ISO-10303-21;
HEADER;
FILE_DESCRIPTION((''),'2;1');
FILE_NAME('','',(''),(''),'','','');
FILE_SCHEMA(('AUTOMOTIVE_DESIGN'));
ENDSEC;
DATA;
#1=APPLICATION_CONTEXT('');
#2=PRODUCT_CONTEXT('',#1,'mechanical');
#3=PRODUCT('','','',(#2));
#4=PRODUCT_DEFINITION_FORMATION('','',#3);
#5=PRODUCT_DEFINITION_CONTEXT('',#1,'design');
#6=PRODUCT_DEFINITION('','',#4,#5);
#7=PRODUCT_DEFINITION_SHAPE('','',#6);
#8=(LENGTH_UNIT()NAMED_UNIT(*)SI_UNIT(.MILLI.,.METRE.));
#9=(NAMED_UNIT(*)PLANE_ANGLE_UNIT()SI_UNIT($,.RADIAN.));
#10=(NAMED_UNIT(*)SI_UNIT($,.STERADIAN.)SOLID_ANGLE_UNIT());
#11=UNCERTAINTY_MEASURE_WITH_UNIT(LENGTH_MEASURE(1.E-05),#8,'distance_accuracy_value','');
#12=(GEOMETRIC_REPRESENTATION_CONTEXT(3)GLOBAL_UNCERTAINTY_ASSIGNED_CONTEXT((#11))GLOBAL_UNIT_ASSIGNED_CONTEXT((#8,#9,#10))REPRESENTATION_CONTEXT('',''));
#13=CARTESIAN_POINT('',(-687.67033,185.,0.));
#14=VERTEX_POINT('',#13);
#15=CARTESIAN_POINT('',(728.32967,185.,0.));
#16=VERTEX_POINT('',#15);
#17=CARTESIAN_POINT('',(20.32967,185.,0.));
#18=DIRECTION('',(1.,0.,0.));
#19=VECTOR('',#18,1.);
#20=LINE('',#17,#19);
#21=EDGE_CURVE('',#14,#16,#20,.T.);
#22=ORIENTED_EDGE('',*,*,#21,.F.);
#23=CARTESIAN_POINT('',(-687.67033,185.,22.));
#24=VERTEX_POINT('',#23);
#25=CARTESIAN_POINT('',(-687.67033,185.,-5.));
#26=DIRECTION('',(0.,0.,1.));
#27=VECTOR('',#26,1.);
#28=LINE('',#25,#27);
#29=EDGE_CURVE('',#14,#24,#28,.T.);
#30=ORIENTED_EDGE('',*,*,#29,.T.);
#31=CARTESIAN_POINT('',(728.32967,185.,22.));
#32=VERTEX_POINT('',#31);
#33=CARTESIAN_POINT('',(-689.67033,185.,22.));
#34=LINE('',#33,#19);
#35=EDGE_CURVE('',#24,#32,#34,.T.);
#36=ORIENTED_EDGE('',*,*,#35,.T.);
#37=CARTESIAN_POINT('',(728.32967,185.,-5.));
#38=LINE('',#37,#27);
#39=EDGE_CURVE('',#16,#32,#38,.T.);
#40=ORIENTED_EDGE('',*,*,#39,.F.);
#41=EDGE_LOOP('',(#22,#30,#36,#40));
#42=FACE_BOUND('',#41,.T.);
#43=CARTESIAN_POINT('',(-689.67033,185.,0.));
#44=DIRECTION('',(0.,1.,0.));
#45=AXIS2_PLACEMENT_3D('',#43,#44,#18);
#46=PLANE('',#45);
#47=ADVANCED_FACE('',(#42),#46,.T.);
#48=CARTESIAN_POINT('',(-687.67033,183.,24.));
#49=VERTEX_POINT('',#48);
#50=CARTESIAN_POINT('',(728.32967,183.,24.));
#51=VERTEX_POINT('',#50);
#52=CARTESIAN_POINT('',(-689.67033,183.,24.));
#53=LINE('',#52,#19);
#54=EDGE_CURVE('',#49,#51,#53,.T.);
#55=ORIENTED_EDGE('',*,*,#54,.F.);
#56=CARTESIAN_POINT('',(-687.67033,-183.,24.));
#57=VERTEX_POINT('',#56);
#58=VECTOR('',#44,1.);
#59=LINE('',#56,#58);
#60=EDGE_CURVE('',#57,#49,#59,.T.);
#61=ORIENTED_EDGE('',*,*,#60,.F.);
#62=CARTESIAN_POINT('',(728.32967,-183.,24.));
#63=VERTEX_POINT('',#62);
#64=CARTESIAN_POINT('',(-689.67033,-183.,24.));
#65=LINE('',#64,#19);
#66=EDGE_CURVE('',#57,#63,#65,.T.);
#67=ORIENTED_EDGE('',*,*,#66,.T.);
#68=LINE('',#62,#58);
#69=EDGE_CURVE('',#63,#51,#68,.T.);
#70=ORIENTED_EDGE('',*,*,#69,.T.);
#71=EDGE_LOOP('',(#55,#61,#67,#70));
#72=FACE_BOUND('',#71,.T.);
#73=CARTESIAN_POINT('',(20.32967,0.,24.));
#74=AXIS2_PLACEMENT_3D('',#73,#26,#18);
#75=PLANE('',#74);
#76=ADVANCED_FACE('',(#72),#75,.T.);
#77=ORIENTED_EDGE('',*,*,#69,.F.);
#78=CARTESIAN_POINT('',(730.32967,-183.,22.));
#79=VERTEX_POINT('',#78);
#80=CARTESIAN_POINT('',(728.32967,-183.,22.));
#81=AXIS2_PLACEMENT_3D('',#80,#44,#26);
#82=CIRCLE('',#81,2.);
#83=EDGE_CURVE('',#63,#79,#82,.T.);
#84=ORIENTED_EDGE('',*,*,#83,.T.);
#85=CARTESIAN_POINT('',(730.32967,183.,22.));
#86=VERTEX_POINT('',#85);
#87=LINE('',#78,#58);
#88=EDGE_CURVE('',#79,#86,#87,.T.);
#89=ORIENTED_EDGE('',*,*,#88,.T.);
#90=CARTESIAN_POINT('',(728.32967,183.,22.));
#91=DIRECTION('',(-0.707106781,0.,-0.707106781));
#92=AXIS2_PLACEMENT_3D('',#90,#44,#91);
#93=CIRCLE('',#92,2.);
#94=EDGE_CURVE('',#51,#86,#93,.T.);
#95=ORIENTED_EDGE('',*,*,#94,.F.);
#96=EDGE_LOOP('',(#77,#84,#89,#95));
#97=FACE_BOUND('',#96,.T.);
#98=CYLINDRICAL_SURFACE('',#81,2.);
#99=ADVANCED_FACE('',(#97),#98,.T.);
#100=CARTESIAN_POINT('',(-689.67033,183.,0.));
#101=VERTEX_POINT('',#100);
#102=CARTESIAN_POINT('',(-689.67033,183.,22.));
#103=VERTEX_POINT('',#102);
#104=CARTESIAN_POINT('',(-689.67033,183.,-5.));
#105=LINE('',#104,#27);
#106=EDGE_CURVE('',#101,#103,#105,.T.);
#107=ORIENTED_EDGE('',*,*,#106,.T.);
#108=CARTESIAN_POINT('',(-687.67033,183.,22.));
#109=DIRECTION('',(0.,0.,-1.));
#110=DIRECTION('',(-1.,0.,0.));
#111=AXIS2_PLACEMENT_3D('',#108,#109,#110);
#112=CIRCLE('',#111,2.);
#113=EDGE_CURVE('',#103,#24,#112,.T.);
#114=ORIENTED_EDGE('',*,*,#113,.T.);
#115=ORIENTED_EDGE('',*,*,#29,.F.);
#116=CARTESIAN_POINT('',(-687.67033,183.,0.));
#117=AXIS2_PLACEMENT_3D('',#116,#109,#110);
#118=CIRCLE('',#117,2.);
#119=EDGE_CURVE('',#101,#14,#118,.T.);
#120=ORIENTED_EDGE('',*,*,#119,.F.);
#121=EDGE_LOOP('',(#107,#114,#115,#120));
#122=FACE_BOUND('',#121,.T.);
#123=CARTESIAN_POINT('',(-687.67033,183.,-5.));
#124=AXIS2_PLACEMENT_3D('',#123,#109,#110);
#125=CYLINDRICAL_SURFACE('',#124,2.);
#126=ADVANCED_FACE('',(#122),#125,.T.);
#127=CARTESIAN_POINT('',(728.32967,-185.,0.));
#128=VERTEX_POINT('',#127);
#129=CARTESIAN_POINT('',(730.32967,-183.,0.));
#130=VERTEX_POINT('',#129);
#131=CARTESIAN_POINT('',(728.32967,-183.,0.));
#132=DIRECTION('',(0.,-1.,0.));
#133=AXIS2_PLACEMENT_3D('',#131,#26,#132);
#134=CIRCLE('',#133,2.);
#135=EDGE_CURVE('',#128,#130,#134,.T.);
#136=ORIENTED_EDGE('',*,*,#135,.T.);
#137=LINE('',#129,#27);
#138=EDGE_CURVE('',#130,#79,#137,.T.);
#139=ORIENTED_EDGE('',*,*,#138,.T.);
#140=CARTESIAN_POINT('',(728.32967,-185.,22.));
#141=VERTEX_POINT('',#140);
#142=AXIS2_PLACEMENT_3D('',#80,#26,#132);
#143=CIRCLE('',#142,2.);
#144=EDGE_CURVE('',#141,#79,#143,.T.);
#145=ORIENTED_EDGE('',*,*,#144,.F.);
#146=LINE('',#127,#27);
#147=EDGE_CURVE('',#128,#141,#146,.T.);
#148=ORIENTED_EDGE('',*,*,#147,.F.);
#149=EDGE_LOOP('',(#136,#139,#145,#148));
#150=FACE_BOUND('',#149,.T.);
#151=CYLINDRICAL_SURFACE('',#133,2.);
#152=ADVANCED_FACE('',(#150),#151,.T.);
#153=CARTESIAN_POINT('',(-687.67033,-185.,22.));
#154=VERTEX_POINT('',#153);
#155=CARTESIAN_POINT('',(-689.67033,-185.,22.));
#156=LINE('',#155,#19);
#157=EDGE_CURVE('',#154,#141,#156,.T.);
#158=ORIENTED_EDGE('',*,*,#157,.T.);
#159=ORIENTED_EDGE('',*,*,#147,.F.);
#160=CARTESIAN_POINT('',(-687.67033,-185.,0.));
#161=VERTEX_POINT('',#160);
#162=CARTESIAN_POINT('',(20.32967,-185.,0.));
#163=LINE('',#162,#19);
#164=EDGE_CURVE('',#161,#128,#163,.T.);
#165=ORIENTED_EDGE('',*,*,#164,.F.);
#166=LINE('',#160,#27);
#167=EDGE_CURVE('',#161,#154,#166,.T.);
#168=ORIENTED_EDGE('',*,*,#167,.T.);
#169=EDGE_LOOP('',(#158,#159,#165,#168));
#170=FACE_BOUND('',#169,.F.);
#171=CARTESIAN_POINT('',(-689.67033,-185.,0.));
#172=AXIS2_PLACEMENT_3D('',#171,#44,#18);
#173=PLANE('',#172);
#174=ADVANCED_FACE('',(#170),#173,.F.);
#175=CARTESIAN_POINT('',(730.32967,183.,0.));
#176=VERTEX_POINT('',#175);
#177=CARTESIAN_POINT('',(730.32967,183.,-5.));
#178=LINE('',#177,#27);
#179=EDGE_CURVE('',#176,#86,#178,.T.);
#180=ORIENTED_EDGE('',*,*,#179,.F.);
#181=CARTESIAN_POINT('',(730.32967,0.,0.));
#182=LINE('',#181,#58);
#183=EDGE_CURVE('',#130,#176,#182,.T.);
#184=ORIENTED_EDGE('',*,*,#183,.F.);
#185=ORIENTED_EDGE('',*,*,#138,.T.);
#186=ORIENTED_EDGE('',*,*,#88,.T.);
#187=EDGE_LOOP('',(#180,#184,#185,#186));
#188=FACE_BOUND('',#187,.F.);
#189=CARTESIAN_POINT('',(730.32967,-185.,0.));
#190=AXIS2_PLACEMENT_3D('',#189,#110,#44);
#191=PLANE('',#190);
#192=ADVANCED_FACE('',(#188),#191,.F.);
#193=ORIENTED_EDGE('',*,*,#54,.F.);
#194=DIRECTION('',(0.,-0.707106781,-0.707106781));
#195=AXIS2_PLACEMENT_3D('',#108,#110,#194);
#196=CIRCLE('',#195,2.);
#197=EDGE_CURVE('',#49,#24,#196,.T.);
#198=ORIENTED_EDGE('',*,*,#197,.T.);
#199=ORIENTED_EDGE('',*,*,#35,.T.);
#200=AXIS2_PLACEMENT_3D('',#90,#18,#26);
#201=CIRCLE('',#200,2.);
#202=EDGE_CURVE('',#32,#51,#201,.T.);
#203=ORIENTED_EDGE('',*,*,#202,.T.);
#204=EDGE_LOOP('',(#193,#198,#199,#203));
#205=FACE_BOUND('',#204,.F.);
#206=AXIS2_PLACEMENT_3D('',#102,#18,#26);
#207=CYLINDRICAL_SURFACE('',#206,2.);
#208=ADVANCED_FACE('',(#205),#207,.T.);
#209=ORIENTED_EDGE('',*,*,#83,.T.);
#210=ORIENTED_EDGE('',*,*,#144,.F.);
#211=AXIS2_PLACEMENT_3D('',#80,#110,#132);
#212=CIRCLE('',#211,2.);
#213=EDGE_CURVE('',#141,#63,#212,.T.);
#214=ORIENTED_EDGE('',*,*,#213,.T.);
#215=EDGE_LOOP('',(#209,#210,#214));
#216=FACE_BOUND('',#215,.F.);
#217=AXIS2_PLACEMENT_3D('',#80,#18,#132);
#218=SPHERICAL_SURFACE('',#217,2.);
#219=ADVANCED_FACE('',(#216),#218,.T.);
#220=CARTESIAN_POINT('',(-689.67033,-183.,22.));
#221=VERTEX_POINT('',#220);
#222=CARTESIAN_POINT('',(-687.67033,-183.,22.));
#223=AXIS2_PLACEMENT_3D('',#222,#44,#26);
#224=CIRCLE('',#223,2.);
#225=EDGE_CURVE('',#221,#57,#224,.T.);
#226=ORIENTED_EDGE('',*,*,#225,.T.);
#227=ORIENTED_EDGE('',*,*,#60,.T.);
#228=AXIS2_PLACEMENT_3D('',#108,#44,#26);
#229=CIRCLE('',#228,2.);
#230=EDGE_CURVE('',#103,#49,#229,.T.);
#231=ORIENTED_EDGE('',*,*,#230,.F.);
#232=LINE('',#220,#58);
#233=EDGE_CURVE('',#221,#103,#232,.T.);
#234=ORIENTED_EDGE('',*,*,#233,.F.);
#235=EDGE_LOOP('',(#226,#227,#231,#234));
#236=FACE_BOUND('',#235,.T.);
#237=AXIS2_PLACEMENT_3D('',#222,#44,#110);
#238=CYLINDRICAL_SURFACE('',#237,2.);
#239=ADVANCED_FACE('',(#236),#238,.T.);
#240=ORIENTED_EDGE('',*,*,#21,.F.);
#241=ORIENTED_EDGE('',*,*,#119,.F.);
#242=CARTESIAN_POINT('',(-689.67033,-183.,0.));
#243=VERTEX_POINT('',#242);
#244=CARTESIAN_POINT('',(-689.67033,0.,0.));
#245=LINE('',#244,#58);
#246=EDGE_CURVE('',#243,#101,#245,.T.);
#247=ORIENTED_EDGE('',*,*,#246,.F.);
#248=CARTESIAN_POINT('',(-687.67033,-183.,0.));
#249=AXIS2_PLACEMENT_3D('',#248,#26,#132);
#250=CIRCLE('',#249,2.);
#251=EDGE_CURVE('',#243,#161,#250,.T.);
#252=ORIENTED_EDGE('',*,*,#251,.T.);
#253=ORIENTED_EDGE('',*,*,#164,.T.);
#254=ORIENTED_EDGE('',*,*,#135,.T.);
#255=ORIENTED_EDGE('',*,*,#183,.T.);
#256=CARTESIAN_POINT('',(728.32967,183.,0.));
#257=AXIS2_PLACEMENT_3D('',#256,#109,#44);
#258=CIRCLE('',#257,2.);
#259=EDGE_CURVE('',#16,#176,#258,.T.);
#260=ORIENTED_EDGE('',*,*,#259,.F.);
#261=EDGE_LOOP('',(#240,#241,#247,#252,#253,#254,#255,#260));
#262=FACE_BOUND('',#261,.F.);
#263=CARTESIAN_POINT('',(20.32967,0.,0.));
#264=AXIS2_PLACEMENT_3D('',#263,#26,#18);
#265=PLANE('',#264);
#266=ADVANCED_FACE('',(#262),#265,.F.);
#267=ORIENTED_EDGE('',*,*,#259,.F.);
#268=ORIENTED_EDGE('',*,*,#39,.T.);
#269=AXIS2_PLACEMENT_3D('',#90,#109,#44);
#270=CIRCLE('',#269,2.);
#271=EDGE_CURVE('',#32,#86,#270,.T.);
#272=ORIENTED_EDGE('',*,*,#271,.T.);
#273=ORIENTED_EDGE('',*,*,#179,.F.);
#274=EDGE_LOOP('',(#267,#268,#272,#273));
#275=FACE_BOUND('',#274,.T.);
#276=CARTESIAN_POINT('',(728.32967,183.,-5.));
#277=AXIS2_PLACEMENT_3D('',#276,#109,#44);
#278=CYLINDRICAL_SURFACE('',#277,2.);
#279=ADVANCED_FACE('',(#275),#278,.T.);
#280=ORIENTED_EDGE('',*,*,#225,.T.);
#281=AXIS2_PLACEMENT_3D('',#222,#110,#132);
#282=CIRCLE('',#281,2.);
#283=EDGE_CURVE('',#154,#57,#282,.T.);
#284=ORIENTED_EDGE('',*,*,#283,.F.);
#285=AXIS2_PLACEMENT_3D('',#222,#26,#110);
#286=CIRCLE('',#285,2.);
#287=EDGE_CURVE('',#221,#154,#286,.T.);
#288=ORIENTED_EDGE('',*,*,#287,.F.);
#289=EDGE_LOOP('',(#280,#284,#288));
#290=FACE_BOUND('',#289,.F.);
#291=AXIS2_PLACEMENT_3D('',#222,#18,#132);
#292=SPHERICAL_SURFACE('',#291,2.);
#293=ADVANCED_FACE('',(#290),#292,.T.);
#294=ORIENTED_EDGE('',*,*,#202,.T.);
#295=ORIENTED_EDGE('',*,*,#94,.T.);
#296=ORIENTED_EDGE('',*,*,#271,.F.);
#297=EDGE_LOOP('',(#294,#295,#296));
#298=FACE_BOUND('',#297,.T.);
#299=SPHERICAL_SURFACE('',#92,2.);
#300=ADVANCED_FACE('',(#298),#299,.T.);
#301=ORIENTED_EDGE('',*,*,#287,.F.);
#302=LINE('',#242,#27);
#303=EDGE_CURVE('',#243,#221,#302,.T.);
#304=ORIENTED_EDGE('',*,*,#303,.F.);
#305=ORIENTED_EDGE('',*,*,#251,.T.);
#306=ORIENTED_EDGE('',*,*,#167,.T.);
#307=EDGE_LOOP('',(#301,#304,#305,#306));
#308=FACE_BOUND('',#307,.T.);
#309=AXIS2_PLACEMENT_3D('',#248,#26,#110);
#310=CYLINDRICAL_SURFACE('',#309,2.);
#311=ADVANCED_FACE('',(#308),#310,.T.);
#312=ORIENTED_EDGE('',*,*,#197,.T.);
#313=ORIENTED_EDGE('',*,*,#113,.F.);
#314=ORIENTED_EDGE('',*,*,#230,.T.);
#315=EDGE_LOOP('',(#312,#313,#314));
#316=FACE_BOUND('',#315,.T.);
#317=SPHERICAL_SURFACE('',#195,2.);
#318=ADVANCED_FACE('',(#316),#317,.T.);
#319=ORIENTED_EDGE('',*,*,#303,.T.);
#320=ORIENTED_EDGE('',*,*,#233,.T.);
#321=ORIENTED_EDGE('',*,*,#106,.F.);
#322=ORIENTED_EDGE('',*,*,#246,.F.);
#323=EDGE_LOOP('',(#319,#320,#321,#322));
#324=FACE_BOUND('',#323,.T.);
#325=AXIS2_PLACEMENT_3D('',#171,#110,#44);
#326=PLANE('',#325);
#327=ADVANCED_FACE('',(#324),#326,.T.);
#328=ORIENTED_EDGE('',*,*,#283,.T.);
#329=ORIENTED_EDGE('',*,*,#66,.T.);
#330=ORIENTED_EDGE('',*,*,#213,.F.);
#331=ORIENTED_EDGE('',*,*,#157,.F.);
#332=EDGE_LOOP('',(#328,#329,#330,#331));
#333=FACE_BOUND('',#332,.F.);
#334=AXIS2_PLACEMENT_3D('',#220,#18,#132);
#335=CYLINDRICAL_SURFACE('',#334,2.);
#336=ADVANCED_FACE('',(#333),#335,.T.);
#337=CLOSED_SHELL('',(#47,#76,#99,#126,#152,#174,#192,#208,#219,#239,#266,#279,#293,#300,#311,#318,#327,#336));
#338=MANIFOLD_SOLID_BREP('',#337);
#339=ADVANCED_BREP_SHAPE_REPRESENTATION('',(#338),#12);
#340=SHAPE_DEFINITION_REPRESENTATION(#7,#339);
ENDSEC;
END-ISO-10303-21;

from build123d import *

# Parameters (mm, degrees)
F0_W        = 1420
F0_H        = 370
F1_DEPTH    = 24
F2_R        = 2
F3_R        = 2
F4_T1_DEPTH = 27
F4_S5_W     = 2
F4_S5_H     = 2
F4_T6_DEPTH = 2
F5_T1_DEPTH = 27
F5_S5_W     = 2
F5_S5_H     = 2
F5_T6_DEPTH = 2


# Not quite as in the source:
# - a fillet or chamfer that OpenCascade refuses, or shapes differently, is made with other operations: its cross-section is extruded or revolved along the edge and cut away or added


with BuildPart() as f1:
    # F0 (on Top) → F1 (new body)
    with BuildSketch(Plane.XY):
        with Locations((20.329669588, 0)):
            Rectangle(F0_W, F0_H)
    extrude(amount=F1_DEPTH)

    # F2
    f2_edges = [f1.edges().sort_by_distance(p)[0] for p in [
        (20.32967, -185, 24),
    ]]
    fillet(f2_edges, radius=F2_R)

    # F3
    f3_edges = [f1.edges().sort_by_distance(p)[0] for p in [
        (-689.67033, 1, 24),
        (730.32967, 1, 24),
        (20.32967, 185, 24),
    ]]
    fillet(f3_edges, radius=F3_R)

    # F4: fillet of radius 2 on 1 edges, made by hand

    # F4_s2 → F4_t1 (cut)
    with BuildSketch(Plane.XY.offset(-5)):
        with BuildLine():
            ThreePointArc((728.329669588, 185), (729.7438831503, 184.4142135624), (730.329669588, 183))
            Line((730.329669588, 183), (730.329669588, 185))
            Line((730.329669588, 185), (728.329669588, 185))
        make_face()
    extrude(amount=F4_T1_DEPTH, mode=Mode.SUBTRACT)


with BuildPart() as f4_tool4:
    # F4_s5 → F4_t6 (new body)
    with BuildSketch(Plane.XZ.offset(-183)):
        with Locations((729.329669588, 23)):
            Rectangle(F4_S5_W, F4_S5_H)
    extrude(amount=-F4_T6_DEPTH)

    # F4_s7 → F4_t8 (revolve, cut)
    with BuildSketch(Plane(origin=(728.329669588, 183, 22), x_dir=(-0.7071067812, 0, -0.7071067812), z_dir=(0.7071067812, 0, -0.7071067812))):
        with BuildLine():
            ThreePointArc((0, -2), (2, 0), (0, 2))
            Line((0, 2), (0, -2))
        make_face()
    revolve(axis=Axis((728.329669588, 183, 22), (0, 1, 0)), mode=Mode.SUBTRACT)


with BuildPart() as f1_1:
    add(f1.part)

    # F4_t3: cut F4_tool4
    add(f4_tool4.part, mode=Mode.SUBTRACT)

    # F5: fillet of radius 2 on 1 edges, made by hand

    # F5_s2 → F5_t1 (cut)
    with BuildSketch(Plane.XY.offset(-5)):
        with BuildLine():
            ThreePointArc((-689.670330412, 183), (-689.0845439744, 184.4142135624), (-687.670330412, 185))
            Line((-687.670330412, 185), (-689.670330412, 185))
            Line((-689.670330412, 185), (-689.670330412, 183))
        make_face()
    extrude(amount=F5_T1_DEPTH, mode=Mode.SUBTRACT)


with BuildPart() as f5_tool4:
    # F5_s5 → F5_t6 (new body)
    with BuildSketch(Plane.YZ.offset(-687.670330412)):
        with Locations((184, 23)):
            Rectangle(F5_S5_W, F5_S5_H)
    extrude(amount=-F5_T6_DEPTH)

    # F5_s7 → F5_t8 (revolve, cut)
    with BuildSketch(Plane(origin=(-687.670330412, 183, 22), x_dir=(0, -0.7071067812, -0.7071067812), z_dir=(0, 0.7071067812, -0.7071067812))):
        with BuildLine():
            ThreePointArc((0, -2), (2, 0), (0, 2))
            Line((0, 2), (0, -2))
        make_face()
    revolve(axis=Axis((-687.670330412, 183, 22), (-1, 0, 0)), mode=Mode.SUBTRACT)


with BuildPart() as f1_2:
    add(f1_1.part)

    # F5_t3: cut F5_tool4
    add(f5_tool4.part, mode=Mode.SUBTRACT)


solid = f1_2.part
